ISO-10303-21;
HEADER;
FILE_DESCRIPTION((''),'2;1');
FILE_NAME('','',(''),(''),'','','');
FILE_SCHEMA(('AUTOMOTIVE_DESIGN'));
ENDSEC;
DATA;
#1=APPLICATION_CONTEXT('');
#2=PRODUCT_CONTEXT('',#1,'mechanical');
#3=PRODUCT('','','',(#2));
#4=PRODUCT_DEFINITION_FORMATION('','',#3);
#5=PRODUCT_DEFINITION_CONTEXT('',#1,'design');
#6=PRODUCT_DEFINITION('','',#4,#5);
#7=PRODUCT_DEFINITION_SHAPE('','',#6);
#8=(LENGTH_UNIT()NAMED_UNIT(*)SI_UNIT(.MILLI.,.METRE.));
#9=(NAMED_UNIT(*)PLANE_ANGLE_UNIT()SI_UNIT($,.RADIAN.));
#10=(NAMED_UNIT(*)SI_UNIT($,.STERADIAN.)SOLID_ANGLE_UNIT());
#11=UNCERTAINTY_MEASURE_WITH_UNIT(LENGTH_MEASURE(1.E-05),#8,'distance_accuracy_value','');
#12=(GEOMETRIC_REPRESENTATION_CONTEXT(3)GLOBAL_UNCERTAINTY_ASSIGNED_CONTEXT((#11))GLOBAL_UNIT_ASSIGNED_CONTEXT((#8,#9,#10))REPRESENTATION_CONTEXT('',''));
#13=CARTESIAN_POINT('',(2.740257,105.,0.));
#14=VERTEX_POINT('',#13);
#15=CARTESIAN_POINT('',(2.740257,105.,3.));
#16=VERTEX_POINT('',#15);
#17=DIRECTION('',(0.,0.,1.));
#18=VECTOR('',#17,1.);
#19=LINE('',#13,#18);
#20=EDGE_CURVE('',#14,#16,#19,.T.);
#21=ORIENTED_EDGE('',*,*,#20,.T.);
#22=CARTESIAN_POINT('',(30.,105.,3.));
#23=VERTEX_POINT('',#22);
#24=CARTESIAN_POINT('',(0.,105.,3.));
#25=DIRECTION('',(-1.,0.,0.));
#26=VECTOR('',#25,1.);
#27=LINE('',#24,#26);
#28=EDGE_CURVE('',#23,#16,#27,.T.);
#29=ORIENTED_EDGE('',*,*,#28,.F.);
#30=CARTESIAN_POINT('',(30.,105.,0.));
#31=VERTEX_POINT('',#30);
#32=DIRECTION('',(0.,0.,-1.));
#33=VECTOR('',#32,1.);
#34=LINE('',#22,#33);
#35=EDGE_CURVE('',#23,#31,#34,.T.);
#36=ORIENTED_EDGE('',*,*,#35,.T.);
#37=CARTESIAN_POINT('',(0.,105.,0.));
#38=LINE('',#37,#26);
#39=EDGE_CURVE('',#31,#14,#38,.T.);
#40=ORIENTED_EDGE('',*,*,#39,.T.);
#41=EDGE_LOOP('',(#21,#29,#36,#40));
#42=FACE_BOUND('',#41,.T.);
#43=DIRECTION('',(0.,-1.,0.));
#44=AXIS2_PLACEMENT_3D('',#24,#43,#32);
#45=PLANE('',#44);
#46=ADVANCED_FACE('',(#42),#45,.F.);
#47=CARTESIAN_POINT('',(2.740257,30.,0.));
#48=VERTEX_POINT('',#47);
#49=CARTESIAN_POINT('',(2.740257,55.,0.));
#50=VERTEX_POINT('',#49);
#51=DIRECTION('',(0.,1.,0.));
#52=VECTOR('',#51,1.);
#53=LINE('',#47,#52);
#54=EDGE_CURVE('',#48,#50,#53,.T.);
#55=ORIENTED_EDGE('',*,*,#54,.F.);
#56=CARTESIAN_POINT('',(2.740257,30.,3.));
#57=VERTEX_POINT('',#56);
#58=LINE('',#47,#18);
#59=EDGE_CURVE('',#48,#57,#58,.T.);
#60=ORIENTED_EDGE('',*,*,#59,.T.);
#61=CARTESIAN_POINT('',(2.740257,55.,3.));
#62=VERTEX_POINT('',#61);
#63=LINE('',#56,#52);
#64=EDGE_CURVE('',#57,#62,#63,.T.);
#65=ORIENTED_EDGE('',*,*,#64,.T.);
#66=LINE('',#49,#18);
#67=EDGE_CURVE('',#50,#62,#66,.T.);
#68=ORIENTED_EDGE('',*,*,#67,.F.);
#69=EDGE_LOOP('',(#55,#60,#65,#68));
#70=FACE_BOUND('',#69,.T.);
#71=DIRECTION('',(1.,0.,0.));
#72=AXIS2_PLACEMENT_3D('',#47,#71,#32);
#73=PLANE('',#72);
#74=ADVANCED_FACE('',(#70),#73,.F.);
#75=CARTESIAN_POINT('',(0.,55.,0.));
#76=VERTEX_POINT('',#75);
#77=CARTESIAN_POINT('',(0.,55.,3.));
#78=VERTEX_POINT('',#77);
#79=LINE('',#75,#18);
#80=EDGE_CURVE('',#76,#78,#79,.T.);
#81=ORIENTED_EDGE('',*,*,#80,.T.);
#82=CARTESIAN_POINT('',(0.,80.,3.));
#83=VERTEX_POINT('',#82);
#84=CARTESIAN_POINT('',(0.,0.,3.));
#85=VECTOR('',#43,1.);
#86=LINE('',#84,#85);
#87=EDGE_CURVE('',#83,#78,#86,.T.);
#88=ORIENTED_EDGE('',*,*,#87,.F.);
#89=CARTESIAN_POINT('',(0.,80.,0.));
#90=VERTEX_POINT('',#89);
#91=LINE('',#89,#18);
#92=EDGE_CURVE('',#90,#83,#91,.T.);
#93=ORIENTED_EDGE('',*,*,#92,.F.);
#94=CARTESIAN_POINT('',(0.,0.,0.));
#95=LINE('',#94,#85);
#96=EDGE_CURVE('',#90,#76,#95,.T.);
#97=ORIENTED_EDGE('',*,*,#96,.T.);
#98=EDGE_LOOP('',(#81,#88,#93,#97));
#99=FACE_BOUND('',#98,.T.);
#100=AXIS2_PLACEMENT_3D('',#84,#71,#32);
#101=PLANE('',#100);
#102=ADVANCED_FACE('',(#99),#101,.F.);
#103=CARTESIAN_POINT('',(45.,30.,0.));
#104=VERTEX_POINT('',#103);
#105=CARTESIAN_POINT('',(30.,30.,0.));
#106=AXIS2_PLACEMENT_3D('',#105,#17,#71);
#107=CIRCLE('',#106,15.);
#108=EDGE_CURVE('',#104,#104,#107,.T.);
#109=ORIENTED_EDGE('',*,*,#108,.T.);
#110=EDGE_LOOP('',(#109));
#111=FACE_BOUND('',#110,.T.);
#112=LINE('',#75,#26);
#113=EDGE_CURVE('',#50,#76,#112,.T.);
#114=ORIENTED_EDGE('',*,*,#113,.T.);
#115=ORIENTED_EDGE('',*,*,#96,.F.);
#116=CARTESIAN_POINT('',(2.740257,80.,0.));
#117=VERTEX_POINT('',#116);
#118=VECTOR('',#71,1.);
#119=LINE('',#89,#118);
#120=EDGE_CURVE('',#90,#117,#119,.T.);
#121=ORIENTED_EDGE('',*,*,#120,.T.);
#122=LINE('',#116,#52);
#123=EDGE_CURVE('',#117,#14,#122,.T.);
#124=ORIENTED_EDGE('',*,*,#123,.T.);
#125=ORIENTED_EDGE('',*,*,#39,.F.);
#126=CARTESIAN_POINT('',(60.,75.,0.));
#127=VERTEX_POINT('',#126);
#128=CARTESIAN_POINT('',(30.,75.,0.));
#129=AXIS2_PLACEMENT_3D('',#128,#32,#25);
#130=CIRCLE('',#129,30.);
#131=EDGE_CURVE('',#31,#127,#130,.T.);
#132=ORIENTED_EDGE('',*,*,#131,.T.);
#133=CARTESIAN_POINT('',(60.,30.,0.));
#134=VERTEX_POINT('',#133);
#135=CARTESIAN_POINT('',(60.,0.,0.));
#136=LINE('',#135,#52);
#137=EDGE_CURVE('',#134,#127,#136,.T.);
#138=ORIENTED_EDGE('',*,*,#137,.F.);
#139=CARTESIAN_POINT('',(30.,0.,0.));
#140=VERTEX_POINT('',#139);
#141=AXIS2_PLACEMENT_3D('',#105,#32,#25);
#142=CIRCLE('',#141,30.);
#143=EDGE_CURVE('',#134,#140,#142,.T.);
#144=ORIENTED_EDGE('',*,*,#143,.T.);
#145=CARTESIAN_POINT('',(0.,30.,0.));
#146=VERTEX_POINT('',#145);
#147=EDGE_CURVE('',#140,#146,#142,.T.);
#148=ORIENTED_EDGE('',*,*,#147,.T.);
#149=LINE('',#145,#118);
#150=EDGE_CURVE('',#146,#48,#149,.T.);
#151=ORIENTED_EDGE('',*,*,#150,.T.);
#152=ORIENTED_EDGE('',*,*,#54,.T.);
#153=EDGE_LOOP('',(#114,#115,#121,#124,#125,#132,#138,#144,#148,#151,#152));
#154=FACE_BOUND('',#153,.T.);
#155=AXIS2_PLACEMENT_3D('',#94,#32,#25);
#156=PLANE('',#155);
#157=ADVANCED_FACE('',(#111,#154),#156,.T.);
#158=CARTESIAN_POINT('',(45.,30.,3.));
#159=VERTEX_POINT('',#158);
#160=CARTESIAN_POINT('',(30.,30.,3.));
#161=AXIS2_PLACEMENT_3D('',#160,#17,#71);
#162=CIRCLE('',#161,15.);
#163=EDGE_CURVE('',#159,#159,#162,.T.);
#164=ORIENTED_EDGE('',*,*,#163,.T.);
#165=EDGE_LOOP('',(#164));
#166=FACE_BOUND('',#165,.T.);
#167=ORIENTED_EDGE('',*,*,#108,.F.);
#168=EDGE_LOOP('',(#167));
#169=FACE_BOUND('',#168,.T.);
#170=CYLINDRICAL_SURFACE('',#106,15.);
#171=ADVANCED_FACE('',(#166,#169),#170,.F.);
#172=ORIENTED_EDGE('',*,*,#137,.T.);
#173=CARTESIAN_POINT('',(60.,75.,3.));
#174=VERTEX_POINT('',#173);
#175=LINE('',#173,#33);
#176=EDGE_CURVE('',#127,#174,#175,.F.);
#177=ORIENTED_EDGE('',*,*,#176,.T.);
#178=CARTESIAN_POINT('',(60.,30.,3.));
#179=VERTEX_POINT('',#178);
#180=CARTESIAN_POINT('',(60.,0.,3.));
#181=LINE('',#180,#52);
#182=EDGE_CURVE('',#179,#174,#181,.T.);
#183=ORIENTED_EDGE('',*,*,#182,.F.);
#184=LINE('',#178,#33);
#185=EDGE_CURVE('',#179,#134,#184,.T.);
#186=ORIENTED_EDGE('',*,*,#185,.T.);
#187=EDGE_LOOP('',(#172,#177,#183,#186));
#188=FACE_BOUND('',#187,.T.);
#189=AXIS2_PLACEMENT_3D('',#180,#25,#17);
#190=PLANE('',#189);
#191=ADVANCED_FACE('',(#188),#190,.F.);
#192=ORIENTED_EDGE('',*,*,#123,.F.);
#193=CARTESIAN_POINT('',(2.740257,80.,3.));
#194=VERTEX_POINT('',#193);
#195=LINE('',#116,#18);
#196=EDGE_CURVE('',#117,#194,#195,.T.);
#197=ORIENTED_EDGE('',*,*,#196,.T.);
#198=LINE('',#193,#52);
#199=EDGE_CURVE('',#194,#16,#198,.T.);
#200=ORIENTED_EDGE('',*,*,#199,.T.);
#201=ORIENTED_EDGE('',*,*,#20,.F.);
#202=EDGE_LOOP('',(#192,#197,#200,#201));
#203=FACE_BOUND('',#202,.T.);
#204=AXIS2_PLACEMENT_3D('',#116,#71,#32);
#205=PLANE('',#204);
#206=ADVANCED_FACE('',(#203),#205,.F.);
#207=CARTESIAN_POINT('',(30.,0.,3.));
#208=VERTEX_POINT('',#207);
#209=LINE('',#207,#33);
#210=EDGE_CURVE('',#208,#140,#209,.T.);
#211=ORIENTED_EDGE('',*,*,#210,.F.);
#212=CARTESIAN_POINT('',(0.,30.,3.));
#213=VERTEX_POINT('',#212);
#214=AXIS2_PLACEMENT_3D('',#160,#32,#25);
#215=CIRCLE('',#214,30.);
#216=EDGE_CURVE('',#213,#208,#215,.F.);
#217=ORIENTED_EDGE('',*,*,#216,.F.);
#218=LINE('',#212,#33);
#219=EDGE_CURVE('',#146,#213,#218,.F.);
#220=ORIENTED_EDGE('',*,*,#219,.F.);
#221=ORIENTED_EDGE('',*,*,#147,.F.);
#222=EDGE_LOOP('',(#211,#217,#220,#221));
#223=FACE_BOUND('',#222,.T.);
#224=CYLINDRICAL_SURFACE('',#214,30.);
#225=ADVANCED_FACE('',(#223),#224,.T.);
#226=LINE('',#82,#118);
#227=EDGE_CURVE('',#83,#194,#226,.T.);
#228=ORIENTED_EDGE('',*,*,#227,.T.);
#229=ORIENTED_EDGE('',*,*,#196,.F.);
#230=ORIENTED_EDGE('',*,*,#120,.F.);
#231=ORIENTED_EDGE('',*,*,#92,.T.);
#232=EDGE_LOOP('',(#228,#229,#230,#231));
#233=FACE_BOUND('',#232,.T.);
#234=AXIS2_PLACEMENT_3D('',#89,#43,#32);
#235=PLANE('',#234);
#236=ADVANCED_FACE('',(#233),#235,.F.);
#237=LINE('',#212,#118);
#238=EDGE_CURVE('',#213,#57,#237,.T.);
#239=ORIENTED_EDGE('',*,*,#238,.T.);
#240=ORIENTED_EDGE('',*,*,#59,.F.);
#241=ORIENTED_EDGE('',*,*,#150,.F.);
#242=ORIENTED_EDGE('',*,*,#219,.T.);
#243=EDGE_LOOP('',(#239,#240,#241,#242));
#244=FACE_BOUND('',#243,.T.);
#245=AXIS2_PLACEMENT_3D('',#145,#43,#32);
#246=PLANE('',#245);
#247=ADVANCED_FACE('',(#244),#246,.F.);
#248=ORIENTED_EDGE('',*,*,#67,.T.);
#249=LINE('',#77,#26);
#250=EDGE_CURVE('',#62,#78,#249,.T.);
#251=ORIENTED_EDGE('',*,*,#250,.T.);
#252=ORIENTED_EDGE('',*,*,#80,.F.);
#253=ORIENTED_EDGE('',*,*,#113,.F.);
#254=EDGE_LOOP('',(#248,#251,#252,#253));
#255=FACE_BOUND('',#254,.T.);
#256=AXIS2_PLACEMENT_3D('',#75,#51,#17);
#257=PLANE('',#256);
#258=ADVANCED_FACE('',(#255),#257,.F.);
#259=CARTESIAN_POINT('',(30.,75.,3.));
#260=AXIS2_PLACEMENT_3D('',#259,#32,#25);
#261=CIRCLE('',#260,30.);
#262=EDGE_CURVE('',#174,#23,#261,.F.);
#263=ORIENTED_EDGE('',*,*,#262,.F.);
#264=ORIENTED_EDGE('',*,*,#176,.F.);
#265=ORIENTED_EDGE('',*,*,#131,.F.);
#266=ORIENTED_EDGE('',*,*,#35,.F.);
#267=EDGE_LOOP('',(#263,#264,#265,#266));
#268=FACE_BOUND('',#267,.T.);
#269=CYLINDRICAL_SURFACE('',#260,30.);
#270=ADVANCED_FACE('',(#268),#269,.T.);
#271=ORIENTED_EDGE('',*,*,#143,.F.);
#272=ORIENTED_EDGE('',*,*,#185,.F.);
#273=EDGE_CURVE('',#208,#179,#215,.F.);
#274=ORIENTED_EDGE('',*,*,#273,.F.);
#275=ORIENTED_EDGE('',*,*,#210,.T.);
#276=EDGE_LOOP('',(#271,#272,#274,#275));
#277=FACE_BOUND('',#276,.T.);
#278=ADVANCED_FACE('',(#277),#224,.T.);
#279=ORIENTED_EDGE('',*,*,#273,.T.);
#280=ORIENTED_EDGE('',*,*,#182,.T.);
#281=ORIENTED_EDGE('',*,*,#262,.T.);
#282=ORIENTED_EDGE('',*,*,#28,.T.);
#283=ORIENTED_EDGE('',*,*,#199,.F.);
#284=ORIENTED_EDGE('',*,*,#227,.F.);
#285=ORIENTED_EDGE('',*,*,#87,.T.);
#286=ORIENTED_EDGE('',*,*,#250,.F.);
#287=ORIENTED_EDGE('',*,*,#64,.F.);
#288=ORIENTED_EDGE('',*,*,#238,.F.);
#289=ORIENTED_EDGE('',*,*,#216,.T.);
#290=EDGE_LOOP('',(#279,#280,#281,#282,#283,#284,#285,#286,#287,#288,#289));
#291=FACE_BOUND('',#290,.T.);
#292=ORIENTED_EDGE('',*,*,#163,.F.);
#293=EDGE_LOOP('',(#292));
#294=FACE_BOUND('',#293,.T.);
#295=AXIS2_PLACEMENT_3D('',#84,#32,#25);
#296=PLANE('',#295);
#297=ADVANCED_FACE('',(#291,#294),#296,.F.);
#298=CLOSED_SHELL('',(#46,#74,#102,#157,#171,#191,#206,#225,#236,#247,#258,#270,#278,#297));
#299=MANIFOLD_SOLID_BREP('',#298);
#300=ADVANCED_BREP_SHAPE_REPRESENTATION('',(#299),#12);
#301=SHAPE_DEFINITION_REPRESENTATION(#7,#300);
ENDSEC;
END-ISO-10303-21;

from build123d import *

# Parameters (mm, degrees)
ESQUISSE1_W             = 60
ESQUISSE1_H             = 105
BOSS_EXTRU_1_DEPTH      = 3
CONG_1_R                = 30
ESQUISSE2_R             = 15
ENL_V_MAT_EXTRU_1_DEPTH = 3
ESQUISSE3_W             = 2.740256741
ESQUISSE3_H             = 25
ENL_V_MAT_EXTRU_2_DEPTH = 3
CONG_2_R                = 30


with BuildPart() as part:
    # Esquisse1 → Boss.-Extru.1 (new body)
    with BuildSketch(Plane.XY):
        with Locations((30, 52.5)):
            Rectangle(ESQUISSE1_W, ESQUISSE1_H)
    extrude(amount=BOSS_EXTRU_1_DEPTH)

    # Congé1
    cong_1_edges = [part.edges().sort_by_distance(p)[0] for p in [
        (60, 0, 1.5),
        (0, 0, 1.5),
    ]]
    fillet(cong_1_edges, radius=CONG_1_R - 0.0001)  # a hair under: the kernel refuses the full size

    # Esquisse2 → Enlèv. mat.-Extru.1 (cut)
    with BuildSketch(Plane.XY.offset(3)):
        with Locations((30, 30)):
            Circle(ESQUISSE2_R)
    extrude(amount=-ENL_V_MAT_EXTRU_1_DEPTH, mode=Mode.SUBTRACT)

    # Esquisse3 → Enlèv. mat.-Extru.2 (cut)
    with BuildSketch(Plane.XY.offset(3)):
        with Locations((1.370128371, 42.5)):
            Rectangle(ESQUISSE3_W, ESQUISSE3_H)
        with Locations((1.370128371, 92.5)):
            Rectangle(ESQUISSE3_W, ESQUISSE3_H)
    extrude(amount=-ENL_V_MAT_EXTRU_2_DEPTH, mode=Mode.SUBTRACT)

    # Congé2
    cong_2_edges = [part.edges().sort_by_distance(p)[0] for p in [
        (60, 105, 1.5),
    ]]
    fillet(cong_2_edges, radius=CONG_2_R)


solid = part.part
